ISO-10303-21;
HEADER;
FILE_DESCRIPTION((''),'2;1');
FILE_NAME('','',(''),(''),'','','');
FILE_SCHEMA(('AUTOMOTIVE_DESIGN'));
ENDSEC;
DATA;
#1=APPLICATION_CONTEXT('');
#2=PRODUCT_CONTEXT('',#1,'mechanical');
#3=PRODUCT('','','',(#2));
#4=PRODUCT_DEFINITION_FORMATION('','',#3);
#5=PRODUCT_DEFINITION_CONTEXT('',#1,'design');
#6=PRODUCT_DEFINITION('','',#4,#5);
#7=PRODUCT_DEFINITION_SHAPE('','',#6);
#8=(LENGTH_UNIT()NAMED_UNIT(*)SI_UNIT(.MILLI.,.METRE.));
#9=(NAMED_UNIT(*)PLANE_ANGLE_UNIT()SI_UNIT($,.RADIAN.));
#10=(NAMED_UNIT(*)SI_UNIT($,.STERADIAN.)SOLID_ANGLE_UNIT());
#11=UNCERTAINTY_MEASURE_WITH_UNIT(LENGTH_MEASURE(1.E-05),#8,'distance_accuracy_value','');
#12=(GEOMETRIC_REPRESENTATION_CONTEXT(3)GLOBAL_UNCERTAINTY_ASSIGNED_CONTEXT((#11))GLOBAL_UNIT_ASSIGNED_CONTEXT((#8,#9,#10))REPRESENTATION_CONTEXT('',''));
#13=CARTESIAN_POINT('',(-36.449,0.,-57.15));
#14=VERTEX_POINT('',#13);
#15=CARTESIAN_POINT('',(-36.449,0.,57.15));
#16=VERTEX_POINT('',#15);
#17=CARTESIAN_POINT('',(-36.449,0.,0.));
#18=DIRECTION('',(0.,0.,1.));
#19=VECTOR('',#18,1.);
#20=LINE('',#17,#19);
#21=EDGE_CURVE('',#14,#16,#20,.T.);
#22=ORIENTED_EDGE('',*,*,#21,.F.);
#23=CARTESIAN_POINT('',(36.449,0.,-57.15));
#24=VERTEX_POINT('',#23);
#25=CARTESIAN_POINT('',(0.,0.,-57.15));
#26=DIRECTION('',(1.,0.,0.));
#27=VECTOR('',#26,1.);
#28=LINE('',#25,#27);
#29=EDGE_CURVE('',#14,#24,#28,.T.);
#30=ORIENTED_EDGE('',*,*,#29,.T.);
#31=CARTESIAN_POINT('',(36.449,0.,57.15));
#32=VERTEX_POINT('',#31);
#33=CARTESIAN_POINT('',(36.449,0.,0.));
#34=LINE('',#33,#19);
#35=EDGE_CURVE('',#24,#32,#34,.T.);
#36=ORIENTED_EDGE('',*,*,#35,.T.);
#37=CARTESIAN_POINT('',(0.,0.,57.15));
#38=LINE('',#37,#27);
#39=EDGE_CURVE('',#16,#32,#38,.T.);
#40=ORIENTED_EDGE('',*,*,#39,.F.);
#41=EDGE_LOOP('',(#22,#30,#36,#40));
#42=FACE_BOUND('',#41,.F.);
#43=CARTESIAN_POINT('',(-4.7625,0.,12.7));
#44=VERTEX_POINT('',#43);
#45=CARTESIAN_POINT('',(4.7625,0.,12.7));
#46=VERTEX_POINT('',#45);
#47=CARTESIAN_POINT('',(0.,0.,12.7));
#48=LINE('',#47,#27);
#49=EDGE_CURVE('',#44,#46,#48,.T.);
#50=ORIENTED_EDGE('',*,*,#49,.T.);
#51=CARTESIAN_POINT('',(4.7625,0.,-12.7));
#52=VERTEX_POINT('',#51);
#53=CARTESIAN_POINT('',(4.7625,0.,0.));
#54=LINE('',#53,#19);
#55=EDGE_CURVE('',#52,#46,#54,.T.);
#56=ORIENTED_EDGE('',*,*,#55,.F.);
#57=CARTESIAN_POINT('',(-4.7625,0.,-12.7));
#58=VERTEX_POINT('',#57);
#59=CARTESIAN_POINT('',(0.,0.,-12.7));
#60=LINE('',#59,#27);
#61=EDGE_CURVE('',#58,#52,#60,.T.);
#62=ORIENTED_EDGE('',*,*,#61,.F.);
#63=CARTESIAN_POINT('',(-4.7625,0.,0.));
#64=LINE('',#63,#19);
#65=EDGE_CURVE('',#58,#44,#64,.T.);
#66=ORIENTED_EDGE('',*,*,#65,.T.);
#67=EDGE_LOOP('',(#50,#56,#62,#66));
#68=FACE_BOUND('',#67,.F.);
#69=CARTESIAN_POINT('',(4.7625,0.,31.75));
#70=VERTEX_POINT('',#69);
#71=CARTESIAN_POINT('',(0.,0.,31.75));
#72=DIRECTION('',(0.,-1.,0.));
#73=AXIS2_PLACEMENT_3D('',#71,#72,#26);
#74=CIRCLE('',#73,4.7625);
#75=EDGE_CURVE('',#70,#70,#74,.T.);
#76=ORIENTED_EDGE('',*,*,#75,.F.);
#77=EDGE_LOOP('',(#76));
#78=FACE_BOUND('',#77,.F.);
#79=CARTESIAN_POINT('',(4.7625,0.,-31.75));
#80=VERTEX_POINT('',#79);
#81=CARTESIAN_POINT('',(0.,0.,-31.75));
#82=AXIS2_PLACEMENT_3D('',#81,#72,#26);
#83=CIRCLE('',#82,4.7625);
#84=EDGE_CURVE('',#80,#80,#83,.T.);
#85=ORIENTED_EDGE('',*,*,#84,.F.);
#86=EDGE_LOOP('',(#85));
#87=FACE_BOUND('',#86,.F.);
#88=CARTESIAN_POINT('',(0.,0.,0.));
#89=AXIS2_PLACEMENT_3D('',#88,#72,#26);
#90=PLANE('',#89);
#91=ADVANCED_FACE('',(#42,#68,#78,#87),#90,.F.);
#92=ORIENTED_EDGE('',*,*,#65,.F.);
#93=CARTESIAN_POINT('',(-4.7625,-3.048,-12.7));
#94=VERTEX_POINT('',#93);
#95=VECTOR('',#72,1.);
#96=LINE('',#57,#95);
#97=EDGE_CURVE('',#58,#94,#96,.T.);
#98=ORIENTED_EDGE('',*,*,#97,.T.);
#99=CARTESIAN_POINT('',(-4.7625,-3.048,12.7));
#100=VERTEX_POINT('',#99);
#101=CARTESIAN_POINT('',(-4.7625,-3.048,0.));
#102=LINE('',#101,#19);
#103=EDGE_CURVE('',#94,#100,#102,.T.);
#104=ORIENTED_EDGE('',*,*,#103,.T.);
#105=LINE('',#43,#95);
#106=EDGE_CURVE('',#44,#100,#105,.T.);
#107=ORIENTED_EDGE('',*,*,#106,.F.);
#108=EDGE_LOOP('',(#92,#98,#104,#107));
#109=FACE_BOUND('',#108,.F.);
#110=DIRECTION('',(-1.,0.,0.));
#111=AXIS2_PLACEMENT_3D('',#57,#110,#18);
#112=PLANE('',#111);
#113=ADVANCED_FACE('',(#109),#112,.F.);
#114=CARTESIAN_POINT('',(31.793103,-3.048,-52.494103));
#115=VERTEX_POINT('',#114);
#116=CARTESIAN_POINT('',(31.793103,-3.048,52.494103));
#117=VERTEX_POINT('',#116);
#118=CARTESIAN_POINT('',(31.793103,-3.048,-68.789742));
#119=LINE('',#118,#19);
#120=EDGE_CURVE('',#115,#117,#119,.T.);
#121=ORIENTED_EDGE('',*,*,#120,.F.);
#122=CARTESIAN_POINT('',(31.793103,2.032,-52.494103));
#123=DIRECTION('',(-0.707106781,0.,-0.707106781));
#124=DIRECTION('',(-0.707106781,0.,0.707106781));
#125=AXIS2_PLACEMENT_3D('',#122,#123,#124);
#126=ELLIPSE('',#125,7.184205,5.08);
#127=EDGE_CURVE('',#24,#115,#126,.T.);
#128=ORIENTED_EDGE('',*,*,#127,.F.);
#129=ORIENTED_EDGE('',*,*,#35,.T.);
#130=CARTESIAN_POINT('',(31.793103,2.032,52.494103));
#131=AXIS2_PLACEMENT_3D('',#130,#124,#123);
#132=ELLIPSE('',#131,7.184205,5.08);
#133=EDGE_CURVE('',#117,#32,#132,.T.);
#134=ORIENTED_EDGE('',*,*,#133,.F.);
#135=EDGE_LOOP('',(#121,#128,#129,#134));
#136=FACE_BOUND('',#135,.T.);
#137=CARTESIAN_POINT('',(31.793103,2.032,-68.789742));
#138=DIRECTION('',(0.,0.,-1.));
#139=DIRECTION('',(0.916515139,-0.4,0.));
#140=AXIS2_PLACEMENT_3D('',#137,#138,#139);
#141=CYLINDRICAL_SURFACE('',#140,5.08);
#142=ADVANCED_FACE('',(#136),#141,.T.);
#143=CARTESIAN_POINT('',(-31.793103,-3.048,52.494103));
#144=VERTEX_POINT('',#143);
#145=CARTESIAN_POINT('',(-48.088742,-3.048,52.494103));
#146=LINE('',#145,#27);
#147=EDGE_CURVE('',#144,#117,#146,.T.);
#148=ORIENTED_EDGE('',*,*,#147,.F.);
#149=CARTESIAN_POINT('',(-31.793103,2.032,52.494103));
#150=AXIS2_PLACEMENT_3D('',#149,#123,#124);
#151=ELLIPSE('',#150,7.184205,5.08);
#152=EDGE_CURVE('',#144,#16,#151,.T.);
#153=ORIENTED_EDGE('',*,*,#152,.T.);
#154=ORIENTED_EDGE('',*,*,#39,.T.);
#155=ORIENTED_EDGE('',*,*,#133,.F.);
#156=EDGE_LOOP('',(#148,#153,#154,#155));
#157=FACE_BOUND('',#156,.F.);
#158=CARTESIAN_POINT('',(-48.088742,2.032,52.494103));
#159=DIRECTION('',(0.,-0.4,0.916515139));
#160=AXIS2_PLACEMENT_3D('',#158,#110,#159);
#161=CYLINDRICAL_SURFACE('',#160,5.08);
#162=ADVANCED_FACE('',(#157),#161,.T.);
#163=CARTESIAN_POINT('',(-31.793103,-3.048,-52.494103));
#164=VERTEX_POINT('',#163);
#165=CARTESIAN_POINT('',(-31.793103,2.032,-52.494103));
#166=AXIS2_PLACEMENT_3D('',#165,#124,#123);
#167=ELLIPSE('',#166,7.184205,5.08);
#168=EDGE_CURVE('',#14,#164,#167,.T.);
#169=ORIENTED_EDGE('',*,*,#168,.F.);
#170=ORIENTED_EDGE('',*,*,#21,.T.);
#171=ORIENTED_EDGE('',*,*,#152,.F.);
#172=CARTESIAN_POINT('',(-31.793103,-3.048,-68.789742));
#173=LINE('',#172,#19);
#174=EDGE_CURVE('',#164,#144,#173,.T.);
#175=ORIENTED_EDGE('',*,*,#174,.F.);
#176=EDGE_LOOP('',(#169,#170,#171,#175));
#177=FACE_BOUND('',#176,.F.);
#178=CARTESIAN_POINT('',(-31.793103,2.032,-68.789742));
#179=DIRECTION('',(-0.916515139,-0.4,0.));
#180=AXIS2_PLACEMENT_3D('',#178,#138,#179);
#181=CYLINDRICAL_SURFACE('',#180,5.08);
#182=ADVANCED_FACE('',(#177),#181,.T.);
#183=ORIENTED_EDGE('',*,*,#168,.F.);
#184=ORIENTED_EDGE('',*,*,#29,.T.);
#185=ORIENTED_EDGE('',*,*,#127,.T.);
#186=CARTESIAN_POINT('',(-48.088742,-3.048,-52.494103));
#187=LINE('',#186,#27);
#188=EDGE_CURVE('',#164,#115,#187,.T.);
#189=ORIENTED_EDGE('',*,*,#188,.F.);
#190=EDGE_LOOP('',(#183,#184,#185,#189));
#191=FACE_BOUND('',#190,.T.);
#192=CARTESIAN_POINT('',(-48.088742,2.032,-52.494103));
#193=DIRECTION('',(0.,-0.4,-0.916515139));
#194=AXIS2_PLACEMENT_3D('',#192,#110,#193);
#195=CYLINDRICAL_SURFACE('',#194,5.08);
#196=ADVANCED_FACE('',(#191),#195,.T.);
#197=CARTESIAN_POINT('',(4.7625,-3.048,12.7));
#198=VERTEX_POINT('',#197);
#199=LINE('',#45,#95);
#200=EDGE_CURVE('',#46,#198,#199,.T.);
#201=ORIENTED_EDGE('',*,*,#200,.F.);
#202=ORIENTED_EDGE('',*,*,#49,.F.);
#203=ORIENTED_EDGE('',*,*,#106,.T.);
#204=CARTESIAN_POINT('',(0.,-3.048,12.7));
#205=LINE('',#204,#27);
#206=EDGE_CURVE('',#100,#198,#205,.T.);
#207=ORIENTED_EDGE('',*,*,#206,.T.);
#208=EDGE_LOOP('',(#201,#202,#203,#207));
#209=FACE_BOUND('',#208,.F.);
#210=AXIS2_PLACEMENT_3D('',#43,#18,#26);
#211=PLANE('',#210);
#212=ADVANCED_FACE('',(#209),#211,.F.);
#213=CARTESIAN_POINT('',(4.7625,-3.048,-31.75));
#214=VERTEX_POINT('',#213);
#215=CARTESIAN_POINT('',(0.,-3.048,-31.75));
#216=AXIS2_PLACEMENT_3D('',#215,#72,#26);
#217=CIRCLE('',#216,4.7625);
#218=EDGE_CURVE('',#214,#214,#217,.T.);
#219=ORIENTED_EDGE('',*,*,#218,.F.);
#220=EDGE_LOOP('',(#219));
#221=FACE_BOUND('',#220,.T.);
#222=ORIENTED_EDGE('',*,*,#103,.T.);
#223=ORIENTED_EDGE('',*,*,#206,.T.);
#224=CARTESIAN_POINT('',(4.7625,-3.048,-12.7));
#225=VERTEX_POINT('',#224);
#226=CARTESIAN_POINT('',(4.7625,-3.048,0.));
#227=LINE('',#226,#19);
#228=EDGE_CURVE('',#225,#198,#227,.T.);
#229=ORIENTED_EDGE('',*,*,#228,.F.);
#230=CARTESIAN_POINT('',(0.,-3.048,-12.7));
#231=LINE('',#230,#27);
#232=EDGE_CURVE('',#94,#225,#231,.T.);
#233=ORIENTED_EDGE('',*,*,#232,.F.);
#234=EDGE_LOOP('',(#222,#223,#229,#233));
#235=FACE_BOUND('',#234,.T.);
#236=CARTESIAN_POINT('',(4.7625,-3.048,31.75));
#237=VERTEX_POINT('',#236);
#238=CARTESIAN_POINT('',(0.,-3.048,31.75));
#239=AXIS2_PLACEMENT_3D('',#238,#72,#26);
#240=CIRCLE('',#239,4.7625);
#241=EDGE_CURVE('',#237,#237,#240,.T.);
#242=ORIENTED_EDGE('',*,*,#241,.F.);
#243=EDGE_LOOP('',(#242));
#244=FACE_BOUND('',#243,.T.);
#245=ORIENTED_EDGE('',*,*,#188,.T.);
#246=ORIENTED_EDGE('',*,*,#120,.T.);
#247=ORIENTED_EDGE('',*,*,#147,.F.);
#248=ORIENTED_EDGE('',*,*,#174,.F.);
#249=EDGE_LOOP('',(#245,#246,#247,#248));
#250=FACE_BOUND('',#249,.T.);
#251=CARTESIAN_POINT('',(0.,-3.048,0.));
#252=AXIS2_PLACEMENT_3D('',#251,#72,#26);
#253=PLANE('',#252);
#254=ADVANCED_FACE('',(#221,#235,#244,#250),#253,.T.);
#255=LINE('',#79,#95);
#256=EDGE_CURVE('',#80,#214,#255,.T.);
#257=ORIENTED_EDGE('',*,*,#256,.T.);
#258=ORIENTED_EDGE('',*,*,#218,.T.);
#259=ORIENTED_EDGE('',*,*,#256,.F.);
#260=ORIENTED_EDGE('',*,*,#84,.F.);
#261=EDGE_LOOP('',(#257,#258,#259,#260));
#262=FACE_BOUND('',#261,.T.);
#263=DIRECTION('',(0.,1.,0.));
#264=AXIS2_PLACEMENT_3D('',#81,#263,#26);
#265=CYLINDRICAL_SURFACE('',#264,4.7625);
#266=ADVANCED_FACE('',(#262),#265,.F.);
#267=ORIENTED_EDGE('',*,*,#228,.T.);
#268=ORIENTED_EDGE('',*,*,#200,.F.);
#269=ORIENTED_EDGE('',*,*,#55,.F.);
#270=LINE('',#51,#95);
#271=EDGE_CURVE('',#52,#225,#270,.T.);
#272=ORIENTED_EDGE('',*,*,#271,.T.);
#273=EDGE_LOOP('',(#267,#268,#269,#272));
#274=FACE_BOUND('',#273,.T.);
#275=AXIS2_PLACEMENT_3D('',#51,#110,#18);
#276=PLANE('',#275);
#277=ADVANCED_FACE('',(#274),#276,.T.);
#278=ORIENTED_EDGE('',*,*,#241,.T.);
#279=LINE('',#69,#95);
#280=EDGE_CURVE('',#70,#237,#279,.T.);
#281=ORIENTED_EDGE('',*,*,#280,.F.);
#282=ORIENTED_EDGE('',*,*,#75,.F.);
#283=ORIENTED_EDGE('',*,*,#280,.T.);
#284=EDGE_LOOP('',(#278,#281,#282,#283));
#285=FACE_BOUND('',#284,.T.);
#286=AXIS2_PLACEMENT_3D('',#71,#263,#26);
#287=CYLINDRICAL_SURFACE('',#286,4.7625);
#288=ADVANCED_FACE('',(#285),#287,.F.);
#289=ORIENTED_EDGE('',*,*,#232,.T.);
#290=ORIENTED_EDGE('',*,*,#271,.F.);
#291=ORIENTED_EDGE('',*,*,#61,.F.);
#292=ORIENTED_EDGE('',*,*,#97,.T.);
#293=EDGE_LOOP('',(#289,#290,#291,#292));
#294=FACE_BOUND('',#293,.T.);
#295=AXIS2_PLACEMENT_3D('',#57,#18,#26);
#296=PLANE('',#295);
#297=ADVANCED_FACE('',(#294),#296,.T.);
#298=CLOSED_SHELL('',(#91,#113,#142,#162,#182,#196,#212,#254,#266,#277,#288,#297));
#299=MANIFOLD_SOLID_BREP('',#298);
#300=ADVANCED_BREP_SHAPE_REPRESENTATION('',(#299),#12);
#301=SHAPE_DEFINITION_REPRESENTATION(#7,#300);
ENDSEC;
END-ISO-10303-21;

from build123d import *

# Parameters (mm, degrees)
F0_W        = 72.898
F0_H        = 114.3
F0_R        = 4.7625
F0_W_2      = 9.525
F0_H_2      = 25.4
F1_DEPTH    = 3.048
F2_T1_DEPTH = 96.1774845304
F2_T3_DEPTH = 137.5794845304


# Not quite as in the source:
# - a fillet or chamfer that OpenCascade refuses, or shapes differently, is made with other operations: its cross-section is extruded or revolved along the edge and cut away or added


with BuildPart() as f1:
    # F0 (on Front) → F1 (new body)
    with BuildSketch(Plane.XZ):
        Rectangle(F0_W, F0_H)
        with Locations((0, -31.75)):
            Circle(F0_R, mode=Mode.SUBTRACT)
        Rectangle(F0_W_2, F0_H_2, mode=Mode.SUBTRACT)
        with Locations((0, 31.75)):
            Circle(F0_R, mode=Mode.SUBTRACT)
    extrude(amount=F1_DEPTH)

    # F2: fillet of radius 5.08 on 4 edges, made by hand

    # F2_s2 → F2_t1 (cut)
    with BuildSketch(Plane.YZ.offset(-48.0887422652)):
        with BuildLine():
            ThreePointArc((0, 57.15), (-2.2182329348, 55.2765336861), (-3.048, 52.4941030939))
            Line((-3.048, 52.4941030939), (-3.048, 57.15))
            Line((-3.048, 57.15), (0, 57.15))
        make_face()
        with BuildLine():
            ThreePointArc((0, -57.15), (-2.2182329348, -55.2765336861), (-3.048, -52.4941030939))
            Line((-3.048, -52.4941030939), (-3.048, -57.15))
            Line((-3.048, -57.15), (0, -57.15))
        make_face()
    extrude(amount=F2_T1_DEPTH, mode=Mode.SUBTRACT)

    # F2_s4 → F2_t3 (cut)
    with BuildSketch(Plane.XY.offset(-68.7897422652)):
        with BuildLine():
            ThreePointArc((36.449, 0), (34.5755336861, -2.2182329348), (31.7931030939, -3.048))
            Line((31.7931030939, -3.048), (36.449, -3.048))
            Line((36.449, -3.048), (36.449, 0))
        make_face()
        with BuildLine():
            ThreePointArc((-36.449, 0), (-34.5755336861, -2.2182329348), (-31.7931030939, -3.048))
            Line((-31.7931030939, -3.048), (-36.449, -3.048))
            Line((-36.449, -3.048), (-36.449, 0))
        make_face()
    extrude(amount=F2_T3_DEPTH, mode=Mode.SUBTRACT)


solid = f1.part
